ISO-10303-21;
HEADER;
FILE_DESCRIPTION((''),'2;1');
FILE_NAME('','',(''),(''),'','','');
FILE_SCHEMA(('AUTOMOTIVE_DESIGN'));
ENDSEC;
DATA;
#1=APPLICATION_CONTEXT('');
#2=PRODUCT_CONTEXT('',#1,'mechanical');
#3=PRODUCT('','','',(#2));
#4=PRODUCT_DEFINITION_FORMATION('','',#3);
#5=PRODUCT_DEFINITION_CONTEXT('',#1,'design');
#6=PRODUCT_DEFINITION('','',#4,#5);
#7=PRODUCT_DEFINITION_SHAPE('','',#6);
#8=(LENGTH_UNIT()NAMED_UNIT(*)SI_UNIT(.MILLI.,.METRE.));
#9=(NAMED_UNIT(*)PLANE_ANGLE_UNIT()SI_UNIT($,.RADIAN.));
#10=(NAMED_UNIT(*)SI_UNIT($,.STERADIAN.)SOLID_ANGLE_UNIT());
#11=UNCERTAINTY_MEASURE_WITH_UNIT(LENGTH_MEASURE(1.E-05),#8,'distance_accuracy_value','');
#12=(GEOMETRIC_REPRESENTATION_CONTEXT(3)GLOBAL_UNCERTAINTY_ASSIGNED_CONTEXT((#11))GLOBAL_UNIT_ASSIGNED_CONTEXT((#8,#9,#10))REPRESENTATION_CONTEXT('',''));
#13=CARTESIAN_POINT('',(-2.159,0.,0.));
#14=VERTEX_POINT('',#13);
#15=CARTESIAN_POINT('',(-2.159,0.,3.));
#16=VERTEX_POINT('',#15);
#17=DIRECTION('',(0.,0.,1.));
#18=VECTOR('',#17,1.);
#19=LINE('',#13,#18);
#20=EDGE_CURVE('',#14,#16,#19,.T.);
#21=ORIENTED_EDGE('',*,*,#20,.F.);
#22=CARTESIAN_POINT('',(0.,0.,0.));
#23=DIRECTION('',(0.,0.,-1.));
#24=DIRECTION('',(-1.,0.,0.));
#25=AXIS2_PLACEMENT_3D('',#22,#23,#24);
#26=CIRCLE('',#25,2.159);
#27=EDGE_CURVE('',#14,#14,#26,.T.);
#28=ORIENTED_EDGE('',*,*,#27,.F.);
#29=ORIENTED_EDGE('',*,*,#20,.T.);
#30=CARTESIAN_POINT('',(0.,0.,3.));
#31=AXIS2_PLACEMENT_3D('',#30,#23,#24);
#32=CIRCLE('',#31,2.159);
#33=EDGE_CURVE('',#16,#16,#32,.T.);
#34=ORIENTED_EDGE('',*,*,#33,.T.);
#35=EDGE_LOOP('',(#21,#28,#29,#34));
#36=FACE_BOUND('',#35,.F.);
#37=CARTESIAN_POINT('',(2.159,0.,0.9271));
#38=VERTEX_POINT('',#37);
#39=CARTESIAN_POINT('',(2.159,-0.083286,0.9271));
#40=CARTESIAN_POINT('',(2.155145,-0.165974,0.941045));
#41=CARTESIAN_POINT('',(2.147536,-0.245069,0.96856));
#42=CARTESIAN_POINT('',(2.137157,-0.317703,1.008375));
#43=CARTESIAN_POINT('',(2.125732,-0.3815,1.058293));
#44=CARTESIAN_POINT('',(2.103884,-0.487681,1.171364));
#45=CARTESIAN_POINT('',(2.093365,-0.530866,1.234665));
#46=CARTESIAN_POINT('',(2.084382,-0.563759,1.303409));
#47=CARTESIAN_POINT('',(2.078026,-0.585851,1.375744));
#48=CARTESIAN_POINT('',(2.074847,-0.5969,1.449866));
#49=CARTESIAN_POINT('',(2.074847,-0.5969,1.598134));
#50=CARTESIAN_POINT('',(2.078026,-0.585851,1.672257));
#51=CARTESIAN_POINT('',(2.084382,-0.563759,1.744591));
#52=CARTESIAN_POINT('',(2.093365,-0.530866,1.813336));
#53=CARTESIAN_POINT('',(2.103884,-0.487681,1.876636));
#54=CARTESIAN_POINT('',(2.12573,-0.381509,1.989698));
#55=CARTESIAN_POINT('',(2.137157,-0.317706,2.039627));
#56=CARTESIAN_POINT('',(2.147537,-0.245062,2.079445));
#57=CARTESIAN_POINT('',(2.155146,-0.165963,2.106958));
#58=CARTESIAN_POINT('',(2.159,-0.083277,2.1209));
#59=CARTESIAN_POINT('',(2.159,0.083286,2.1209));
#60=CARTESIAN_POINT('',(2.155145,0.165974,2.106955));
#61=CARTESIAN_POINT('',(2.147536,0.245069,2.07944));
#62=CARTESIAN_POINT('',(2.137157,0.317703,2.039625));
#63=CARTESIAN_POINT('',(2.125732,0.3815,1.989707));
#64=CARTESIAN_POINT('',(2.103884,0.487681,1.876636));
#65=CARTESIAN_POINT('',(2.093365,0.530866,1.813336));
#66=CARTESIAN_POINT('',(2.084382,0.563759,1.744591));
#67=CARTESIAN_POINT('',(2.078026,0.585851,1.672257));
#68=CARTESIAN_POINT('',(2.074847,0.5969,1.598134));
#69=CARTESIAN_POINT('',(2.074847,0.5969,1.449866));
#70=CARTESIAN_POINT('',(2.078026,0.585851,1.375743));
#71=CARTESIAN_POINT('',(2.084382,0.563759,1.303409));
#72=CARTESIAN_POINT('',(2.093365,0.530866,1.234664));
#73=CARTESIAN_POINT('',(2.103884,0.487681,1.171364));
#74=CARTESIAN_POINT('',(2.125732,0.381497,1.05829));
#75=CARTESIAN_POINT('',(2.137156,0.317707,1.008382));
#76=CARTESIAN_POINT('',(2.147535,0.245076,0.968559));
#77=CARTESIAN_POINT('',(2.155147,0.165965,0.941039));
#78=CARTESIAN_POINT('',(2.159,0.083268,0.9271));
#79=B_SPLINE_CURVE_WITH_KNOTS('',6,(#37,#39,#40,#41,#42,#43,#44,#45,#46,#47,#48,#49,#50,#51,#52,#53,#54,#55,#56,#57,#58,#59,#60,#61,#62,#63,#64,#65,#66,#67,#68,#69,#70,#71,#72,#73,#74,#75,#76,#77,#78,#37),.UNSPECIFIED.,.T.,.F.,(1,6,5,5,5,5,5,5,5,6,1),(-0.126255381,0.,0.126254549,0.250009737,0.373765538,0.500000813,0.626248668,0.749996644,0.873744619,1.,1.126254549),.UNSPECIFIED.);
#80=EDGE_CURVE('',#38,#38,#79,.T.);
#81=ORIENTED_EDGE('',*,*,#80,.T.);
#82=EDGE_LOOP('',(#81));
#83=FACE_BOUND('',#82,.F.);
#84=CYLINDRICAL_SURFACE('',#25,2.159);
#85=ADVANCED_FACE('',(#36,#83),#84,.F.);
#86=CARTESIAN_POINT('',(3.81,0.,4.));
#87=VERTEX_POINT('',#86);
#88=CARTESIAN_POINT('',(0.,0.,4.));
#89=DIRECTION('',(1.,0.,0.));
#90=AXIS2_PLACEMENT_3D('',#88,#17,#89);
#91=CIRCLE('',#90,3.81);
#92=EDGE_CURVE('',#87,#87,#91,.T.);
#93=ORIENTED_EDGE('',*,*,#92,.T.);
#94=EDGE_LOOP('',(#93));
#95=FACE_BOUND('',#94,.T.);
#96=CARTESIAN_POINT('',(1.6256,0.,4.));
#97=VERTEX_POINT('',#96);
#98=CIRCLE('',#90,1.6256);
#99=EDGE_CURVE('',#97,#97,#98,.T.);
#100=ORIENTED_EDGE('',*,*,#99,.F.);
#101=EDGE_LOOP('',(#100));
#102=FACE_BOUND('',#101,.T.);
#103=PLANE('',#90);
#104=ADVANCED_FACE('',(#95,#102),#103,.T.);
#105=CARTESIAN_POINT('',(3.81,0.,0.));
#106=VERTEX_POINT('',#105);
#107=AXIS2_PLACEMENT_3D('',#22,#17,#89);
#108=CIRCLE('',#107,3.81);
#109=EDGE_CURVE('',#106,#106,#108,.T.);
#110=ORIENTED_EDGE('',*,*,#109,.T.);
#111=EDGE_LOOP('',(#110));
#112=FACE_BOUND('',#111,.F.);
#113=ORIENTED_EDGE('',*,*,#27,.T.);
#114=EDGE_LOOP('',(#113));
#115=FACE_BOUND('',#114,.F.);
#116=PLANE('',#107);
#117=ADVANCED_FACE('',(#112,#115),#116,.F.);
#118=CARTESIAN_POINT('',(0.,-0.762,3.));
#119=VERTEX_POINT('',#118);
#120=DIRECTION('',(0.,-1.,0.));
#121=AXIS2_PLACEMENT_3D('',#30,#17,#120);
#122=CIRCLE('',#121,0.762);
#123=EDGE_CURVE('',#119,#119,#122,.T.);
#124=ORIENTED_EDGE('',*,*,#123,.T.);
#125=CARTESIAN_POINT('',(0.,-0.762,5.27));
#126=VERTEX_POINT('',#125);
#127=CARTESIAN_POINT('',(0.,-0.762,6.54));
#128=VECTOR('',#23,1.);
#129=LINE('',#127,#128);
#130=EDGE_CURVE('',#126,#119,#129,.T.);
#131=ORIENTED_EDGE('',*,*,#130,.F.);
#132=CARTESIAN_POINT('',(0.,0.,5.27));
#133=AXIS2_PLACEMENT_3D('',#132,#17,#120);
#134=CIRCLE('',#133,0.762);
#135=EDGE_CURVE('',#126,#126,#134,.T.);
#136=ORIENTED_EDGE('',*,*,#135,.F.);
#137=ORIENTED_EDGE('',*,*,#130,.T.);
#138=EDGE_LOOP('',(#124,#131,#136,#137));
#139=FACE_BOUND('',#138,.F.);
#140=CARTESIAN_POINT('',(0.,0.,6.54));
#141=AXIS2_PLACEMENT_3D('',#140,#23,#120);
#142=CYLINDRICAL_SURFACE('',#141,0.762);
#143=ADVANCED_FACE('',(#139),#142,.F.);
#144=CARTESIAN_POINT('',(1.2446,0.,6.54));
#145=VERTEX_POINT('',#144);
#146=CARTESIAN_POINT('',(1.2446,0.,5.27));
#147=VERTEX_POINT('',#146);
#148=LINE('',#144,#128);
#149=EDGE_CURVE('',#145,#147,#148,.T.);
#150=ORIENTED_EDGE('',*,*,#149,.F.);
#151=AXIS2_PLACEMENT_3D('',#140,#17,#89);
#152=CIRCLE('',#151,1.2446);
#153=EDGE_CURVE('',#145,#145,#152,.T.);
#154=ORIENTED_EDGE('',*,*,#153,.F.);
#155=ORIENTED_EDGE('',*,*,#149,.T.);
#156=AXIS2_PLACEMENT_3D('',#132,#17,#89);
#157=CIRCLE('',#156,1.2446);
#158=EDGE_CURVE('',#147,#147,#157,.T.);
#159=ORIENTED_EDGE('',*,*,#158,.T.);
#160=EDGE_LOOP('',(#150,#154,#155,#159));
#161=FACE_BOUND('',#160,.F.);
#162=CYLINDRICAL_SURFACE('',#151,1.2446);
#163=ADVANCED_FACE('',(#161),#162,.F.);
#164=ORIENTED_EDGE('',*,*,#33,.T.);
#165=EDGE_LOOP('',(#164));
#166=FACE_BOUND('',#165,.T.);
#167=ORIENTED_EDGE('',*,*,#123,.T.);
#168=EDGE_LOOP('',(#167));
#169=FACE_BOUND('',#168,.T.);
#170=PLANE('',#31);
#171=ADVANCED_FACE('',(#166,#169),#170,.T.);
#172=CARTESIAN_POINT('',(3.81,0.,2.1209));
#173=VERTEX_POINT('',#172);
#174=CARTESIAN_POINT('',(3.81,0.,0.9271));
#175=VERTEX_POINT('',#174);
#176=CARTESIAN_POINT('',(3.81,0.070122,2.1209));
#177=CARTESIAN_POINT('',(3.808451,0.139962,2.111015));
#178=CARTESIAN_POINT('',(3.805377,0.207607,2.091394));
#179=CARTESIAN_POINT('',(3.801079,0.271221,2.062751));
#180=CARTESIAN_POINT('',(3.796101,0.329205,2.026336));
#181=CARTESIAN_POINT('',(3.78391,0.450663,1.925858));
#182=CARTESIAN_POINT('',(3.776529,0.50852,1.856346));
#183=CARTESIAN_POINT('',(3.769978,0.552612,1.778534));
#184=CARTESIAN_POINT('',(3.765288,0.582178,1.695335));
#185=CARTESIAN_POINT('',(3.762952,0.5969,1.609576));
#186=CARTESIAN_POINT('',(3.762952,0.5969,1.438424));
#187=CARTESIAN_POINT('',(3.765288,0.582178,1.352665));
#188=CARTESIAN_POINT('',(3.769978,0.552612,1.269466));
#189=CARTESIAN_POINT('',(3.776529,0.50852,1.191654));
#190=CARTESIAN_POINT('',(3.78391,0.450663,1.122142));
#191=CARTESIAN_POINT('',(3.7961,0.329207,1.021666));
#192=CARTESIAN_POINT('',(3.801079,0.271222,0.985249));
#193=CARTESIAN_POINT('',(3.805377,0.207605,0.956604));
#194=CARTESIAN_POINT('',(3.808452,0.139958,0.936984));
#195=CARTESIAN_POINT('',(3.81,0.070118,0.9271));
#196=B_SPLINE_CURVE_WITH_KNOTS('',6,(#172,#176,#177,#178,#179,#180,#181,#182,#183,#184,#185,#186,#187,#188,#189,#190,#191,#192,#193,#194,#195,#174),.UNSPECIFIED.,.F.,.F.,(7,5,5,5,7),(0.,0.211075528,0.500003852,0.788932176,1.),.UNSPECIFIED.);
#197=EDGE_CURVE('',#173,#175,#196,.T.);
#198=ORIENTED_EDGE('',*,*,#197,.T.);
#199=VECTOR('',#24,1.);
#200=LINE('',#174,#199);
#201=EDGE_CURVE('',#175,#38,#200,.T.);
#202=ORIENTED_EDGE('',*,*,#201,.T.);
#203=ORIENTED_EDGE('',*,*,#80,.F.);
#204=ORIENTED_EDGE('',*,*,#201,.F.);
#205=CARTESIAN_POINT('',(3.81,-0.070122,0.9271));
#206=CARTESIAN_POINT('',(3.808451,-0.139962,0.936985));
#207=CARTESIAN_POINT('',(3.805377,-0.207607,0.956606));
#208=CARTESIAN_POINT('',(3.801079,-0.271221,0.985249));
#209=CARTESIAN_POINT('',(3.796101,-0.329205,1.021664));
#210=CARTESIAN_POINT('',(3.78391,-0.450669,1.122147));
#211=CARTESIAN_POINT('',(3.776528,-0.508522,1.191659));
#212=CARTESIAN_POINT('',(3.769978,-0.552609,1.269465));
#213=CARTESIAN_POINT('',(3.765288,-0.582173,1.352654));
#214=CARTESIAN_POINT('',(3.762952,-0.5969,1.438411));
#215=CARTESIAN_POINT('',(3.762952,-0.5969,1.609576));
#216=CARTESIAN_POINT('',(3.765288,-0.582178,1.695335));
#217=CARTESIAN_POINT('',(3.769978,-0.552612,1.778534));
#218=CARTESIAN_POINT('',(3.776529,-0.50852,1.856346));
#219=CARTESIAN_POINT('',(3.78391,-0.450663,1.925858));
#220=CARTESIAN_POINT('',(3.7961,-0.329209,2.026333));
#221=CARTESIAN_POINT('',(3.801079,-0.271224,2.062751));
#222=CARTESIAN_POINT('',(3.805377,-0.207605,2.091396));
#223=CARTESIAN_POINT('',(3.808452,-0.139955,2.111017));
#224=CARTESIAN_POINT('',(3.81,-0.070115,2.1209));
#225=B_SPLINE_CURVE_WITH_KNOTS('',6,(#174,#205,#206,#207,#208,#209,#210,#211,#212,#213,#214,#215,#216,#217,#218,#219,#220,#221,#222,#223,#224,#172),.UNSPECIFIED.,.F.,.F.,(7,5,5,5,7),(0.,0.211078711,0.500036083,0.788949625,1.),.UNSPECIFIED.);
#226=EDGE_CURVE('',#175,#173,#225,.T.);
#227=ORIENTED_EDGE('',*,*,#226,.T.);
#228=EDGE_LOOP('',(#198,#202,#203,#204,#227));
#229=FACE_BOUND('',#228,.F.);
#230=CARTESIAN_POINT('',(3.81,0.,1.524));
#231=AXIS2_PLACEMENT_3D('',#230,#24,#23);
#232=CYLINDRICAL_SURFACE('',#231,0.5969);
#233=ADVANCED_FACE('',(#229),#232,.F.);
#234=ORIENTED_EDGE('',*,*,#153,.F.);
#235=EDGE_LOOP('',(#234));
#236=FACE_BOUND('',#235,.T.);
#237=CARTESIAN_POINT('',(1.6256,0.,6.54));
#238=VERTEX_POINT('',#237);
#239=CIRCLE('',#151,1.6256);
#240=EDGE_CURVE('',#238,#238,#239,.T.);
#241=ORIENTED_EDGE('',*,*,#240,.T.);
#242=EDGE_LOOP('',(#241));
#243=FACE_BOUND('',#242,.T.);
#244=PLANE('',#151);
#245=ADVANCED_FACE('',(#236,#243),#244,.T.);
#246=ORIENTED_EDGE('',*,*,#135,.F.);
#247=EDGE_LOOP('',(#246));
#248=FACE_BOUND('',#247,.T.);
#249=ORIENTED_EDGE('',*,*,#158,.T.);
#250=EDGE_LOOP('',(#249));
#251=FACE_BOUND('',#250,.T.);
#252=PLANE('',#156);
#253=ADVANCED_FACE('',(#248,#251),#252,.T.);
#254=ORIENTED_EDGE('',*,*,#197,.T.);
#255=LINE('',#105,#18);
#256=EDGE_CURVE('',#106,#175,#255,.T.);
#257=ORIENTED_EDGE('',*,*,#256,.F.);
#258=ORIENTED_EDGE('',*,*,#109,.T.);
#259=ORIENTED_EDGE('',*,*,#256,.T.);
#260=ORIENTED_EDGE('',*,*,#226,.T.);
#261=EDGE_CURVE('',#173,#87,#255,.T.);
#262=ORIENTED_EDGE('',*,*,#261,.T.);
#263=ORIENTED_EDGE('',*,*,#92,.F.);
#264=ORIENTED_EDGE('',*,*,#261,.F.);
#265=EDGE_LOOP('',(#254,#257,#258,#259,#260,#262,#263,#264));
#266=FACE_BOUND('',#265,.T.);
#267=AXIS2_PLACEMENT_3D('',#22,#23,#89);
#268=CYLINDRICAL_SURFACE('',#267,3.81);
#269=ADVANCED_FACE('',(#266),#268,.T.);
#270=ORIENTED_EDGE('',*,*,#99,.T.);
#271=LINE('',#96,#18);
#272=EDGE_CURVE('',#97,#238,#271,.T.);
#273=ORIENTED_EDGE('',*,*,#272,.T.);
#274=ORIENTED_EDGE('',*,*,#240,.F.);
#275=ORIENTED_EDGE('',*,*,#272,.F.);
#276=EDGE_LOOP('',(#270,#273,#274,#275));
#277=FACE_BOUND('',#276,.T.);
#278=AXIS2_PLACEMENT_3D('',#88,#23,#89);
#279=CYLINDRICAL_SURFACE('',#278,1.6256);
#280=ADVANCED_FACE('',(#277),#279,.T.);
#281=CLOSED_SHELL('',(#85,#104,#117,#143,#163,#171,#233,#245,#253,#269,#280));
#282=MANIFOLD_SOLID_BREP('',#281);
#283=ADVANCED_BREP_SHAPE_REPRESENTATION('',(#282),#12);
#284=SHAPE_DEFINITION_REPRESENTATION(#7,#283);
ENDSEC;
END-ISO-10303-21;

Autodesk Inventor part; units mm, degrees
ref_plane "XZ Plane" through (0, 0, 0) normal (0, 1, 0) x (-1, 0, 0)
ref_plane "XY Plane" through (0, 0, 0) normal (0, 0, 1) x (1, 0, 0)
sketch "Sketch1" plane through (0, 0, 0) normal (0, 0, 1) x (1, 0, 0)
  circle A0 centre (0, 0) radius 3.81
  dimension "d0" = 7.62
extrude "Extrusion1" add sketch "Sketch1" along normal blind 4
sketch "Sketch2" plane through (0, 0, 4) normal (0, 0, 1) x (1, 0, 0)
  circle A0 centre (0, 0) radius 3.81 projected
  circle A1 centre (0, 0) radius 1.6256
  dimension "d3" = 3.2512
extrude "Extrusion2" add sketch "Sketch2" along normal blind 2.54 contours A1
sketch "Sketch3" plane through (0, 0, 6.54) normal (0, 0, 1) x (1, 0, 0)
  circle A0 centre (0, 0) radius 1.6256 projected
hole "Hole1" at (0, 0, 6.54) direction (0, 0, -1) diameter 1.524 end through all
sketch "Sketch4" plane through (0, 0, 0) normal (0, 0, -1) x (-1, 0, 0)
  circle A0 centre (0, 0) radius 0.762 projected
  circle A1 centre (0, 0) radius 3.81 projected
  circle A2 centre (0, 0) radius 2.159
  dimension "d15" = 4.318
extrude "Extrusion3" cut sketch "Sketch4" against normal blind 3 contours A2
ref_plane "Work Plane1" through (3.81, 0, 0) normal (1, 0, 0) x (0, 1, 0)
sketch "Sketch5" plane through (3.81, 0, 0) normal (1, 0, 0) x (0, 1, 0)
  line L0 (-3.81, 4) -> (3.81, 4) projected
  line L1 (-3.81, 0) -> (3.81, 0) projected
  line L2 (0, -1.2) -> (0, 7.2) projected
  line L3 (-2.159, 3) -> (2.159, 3) projected
  point P0 (0, 0)
  point P1 (0, 1.524)
  dimension "d16" = 3
  dimension "d17" = 1.524
hole "Hole2" at (3.81, 0, 1.524) direction (-1, 0, 0) diameter 1.1938 end up to surface
sketch "Sketch6" plane through (0, 0, 6.54) normal (0, 0, 1) x (1, 0, 0)
  circle A0 centre (0, 0) radius 0.762 projected
  circle A1 centre (0, 0) radius 1.6256 projected
  circle A2 centre (0, 0) radius 1.2446
  dimension "d25" = 2.4892
extrude "Extrusion4" cut sketch "Sketch6" against normal blind 1.27 contours A2
properties part number "bottom_cap"
